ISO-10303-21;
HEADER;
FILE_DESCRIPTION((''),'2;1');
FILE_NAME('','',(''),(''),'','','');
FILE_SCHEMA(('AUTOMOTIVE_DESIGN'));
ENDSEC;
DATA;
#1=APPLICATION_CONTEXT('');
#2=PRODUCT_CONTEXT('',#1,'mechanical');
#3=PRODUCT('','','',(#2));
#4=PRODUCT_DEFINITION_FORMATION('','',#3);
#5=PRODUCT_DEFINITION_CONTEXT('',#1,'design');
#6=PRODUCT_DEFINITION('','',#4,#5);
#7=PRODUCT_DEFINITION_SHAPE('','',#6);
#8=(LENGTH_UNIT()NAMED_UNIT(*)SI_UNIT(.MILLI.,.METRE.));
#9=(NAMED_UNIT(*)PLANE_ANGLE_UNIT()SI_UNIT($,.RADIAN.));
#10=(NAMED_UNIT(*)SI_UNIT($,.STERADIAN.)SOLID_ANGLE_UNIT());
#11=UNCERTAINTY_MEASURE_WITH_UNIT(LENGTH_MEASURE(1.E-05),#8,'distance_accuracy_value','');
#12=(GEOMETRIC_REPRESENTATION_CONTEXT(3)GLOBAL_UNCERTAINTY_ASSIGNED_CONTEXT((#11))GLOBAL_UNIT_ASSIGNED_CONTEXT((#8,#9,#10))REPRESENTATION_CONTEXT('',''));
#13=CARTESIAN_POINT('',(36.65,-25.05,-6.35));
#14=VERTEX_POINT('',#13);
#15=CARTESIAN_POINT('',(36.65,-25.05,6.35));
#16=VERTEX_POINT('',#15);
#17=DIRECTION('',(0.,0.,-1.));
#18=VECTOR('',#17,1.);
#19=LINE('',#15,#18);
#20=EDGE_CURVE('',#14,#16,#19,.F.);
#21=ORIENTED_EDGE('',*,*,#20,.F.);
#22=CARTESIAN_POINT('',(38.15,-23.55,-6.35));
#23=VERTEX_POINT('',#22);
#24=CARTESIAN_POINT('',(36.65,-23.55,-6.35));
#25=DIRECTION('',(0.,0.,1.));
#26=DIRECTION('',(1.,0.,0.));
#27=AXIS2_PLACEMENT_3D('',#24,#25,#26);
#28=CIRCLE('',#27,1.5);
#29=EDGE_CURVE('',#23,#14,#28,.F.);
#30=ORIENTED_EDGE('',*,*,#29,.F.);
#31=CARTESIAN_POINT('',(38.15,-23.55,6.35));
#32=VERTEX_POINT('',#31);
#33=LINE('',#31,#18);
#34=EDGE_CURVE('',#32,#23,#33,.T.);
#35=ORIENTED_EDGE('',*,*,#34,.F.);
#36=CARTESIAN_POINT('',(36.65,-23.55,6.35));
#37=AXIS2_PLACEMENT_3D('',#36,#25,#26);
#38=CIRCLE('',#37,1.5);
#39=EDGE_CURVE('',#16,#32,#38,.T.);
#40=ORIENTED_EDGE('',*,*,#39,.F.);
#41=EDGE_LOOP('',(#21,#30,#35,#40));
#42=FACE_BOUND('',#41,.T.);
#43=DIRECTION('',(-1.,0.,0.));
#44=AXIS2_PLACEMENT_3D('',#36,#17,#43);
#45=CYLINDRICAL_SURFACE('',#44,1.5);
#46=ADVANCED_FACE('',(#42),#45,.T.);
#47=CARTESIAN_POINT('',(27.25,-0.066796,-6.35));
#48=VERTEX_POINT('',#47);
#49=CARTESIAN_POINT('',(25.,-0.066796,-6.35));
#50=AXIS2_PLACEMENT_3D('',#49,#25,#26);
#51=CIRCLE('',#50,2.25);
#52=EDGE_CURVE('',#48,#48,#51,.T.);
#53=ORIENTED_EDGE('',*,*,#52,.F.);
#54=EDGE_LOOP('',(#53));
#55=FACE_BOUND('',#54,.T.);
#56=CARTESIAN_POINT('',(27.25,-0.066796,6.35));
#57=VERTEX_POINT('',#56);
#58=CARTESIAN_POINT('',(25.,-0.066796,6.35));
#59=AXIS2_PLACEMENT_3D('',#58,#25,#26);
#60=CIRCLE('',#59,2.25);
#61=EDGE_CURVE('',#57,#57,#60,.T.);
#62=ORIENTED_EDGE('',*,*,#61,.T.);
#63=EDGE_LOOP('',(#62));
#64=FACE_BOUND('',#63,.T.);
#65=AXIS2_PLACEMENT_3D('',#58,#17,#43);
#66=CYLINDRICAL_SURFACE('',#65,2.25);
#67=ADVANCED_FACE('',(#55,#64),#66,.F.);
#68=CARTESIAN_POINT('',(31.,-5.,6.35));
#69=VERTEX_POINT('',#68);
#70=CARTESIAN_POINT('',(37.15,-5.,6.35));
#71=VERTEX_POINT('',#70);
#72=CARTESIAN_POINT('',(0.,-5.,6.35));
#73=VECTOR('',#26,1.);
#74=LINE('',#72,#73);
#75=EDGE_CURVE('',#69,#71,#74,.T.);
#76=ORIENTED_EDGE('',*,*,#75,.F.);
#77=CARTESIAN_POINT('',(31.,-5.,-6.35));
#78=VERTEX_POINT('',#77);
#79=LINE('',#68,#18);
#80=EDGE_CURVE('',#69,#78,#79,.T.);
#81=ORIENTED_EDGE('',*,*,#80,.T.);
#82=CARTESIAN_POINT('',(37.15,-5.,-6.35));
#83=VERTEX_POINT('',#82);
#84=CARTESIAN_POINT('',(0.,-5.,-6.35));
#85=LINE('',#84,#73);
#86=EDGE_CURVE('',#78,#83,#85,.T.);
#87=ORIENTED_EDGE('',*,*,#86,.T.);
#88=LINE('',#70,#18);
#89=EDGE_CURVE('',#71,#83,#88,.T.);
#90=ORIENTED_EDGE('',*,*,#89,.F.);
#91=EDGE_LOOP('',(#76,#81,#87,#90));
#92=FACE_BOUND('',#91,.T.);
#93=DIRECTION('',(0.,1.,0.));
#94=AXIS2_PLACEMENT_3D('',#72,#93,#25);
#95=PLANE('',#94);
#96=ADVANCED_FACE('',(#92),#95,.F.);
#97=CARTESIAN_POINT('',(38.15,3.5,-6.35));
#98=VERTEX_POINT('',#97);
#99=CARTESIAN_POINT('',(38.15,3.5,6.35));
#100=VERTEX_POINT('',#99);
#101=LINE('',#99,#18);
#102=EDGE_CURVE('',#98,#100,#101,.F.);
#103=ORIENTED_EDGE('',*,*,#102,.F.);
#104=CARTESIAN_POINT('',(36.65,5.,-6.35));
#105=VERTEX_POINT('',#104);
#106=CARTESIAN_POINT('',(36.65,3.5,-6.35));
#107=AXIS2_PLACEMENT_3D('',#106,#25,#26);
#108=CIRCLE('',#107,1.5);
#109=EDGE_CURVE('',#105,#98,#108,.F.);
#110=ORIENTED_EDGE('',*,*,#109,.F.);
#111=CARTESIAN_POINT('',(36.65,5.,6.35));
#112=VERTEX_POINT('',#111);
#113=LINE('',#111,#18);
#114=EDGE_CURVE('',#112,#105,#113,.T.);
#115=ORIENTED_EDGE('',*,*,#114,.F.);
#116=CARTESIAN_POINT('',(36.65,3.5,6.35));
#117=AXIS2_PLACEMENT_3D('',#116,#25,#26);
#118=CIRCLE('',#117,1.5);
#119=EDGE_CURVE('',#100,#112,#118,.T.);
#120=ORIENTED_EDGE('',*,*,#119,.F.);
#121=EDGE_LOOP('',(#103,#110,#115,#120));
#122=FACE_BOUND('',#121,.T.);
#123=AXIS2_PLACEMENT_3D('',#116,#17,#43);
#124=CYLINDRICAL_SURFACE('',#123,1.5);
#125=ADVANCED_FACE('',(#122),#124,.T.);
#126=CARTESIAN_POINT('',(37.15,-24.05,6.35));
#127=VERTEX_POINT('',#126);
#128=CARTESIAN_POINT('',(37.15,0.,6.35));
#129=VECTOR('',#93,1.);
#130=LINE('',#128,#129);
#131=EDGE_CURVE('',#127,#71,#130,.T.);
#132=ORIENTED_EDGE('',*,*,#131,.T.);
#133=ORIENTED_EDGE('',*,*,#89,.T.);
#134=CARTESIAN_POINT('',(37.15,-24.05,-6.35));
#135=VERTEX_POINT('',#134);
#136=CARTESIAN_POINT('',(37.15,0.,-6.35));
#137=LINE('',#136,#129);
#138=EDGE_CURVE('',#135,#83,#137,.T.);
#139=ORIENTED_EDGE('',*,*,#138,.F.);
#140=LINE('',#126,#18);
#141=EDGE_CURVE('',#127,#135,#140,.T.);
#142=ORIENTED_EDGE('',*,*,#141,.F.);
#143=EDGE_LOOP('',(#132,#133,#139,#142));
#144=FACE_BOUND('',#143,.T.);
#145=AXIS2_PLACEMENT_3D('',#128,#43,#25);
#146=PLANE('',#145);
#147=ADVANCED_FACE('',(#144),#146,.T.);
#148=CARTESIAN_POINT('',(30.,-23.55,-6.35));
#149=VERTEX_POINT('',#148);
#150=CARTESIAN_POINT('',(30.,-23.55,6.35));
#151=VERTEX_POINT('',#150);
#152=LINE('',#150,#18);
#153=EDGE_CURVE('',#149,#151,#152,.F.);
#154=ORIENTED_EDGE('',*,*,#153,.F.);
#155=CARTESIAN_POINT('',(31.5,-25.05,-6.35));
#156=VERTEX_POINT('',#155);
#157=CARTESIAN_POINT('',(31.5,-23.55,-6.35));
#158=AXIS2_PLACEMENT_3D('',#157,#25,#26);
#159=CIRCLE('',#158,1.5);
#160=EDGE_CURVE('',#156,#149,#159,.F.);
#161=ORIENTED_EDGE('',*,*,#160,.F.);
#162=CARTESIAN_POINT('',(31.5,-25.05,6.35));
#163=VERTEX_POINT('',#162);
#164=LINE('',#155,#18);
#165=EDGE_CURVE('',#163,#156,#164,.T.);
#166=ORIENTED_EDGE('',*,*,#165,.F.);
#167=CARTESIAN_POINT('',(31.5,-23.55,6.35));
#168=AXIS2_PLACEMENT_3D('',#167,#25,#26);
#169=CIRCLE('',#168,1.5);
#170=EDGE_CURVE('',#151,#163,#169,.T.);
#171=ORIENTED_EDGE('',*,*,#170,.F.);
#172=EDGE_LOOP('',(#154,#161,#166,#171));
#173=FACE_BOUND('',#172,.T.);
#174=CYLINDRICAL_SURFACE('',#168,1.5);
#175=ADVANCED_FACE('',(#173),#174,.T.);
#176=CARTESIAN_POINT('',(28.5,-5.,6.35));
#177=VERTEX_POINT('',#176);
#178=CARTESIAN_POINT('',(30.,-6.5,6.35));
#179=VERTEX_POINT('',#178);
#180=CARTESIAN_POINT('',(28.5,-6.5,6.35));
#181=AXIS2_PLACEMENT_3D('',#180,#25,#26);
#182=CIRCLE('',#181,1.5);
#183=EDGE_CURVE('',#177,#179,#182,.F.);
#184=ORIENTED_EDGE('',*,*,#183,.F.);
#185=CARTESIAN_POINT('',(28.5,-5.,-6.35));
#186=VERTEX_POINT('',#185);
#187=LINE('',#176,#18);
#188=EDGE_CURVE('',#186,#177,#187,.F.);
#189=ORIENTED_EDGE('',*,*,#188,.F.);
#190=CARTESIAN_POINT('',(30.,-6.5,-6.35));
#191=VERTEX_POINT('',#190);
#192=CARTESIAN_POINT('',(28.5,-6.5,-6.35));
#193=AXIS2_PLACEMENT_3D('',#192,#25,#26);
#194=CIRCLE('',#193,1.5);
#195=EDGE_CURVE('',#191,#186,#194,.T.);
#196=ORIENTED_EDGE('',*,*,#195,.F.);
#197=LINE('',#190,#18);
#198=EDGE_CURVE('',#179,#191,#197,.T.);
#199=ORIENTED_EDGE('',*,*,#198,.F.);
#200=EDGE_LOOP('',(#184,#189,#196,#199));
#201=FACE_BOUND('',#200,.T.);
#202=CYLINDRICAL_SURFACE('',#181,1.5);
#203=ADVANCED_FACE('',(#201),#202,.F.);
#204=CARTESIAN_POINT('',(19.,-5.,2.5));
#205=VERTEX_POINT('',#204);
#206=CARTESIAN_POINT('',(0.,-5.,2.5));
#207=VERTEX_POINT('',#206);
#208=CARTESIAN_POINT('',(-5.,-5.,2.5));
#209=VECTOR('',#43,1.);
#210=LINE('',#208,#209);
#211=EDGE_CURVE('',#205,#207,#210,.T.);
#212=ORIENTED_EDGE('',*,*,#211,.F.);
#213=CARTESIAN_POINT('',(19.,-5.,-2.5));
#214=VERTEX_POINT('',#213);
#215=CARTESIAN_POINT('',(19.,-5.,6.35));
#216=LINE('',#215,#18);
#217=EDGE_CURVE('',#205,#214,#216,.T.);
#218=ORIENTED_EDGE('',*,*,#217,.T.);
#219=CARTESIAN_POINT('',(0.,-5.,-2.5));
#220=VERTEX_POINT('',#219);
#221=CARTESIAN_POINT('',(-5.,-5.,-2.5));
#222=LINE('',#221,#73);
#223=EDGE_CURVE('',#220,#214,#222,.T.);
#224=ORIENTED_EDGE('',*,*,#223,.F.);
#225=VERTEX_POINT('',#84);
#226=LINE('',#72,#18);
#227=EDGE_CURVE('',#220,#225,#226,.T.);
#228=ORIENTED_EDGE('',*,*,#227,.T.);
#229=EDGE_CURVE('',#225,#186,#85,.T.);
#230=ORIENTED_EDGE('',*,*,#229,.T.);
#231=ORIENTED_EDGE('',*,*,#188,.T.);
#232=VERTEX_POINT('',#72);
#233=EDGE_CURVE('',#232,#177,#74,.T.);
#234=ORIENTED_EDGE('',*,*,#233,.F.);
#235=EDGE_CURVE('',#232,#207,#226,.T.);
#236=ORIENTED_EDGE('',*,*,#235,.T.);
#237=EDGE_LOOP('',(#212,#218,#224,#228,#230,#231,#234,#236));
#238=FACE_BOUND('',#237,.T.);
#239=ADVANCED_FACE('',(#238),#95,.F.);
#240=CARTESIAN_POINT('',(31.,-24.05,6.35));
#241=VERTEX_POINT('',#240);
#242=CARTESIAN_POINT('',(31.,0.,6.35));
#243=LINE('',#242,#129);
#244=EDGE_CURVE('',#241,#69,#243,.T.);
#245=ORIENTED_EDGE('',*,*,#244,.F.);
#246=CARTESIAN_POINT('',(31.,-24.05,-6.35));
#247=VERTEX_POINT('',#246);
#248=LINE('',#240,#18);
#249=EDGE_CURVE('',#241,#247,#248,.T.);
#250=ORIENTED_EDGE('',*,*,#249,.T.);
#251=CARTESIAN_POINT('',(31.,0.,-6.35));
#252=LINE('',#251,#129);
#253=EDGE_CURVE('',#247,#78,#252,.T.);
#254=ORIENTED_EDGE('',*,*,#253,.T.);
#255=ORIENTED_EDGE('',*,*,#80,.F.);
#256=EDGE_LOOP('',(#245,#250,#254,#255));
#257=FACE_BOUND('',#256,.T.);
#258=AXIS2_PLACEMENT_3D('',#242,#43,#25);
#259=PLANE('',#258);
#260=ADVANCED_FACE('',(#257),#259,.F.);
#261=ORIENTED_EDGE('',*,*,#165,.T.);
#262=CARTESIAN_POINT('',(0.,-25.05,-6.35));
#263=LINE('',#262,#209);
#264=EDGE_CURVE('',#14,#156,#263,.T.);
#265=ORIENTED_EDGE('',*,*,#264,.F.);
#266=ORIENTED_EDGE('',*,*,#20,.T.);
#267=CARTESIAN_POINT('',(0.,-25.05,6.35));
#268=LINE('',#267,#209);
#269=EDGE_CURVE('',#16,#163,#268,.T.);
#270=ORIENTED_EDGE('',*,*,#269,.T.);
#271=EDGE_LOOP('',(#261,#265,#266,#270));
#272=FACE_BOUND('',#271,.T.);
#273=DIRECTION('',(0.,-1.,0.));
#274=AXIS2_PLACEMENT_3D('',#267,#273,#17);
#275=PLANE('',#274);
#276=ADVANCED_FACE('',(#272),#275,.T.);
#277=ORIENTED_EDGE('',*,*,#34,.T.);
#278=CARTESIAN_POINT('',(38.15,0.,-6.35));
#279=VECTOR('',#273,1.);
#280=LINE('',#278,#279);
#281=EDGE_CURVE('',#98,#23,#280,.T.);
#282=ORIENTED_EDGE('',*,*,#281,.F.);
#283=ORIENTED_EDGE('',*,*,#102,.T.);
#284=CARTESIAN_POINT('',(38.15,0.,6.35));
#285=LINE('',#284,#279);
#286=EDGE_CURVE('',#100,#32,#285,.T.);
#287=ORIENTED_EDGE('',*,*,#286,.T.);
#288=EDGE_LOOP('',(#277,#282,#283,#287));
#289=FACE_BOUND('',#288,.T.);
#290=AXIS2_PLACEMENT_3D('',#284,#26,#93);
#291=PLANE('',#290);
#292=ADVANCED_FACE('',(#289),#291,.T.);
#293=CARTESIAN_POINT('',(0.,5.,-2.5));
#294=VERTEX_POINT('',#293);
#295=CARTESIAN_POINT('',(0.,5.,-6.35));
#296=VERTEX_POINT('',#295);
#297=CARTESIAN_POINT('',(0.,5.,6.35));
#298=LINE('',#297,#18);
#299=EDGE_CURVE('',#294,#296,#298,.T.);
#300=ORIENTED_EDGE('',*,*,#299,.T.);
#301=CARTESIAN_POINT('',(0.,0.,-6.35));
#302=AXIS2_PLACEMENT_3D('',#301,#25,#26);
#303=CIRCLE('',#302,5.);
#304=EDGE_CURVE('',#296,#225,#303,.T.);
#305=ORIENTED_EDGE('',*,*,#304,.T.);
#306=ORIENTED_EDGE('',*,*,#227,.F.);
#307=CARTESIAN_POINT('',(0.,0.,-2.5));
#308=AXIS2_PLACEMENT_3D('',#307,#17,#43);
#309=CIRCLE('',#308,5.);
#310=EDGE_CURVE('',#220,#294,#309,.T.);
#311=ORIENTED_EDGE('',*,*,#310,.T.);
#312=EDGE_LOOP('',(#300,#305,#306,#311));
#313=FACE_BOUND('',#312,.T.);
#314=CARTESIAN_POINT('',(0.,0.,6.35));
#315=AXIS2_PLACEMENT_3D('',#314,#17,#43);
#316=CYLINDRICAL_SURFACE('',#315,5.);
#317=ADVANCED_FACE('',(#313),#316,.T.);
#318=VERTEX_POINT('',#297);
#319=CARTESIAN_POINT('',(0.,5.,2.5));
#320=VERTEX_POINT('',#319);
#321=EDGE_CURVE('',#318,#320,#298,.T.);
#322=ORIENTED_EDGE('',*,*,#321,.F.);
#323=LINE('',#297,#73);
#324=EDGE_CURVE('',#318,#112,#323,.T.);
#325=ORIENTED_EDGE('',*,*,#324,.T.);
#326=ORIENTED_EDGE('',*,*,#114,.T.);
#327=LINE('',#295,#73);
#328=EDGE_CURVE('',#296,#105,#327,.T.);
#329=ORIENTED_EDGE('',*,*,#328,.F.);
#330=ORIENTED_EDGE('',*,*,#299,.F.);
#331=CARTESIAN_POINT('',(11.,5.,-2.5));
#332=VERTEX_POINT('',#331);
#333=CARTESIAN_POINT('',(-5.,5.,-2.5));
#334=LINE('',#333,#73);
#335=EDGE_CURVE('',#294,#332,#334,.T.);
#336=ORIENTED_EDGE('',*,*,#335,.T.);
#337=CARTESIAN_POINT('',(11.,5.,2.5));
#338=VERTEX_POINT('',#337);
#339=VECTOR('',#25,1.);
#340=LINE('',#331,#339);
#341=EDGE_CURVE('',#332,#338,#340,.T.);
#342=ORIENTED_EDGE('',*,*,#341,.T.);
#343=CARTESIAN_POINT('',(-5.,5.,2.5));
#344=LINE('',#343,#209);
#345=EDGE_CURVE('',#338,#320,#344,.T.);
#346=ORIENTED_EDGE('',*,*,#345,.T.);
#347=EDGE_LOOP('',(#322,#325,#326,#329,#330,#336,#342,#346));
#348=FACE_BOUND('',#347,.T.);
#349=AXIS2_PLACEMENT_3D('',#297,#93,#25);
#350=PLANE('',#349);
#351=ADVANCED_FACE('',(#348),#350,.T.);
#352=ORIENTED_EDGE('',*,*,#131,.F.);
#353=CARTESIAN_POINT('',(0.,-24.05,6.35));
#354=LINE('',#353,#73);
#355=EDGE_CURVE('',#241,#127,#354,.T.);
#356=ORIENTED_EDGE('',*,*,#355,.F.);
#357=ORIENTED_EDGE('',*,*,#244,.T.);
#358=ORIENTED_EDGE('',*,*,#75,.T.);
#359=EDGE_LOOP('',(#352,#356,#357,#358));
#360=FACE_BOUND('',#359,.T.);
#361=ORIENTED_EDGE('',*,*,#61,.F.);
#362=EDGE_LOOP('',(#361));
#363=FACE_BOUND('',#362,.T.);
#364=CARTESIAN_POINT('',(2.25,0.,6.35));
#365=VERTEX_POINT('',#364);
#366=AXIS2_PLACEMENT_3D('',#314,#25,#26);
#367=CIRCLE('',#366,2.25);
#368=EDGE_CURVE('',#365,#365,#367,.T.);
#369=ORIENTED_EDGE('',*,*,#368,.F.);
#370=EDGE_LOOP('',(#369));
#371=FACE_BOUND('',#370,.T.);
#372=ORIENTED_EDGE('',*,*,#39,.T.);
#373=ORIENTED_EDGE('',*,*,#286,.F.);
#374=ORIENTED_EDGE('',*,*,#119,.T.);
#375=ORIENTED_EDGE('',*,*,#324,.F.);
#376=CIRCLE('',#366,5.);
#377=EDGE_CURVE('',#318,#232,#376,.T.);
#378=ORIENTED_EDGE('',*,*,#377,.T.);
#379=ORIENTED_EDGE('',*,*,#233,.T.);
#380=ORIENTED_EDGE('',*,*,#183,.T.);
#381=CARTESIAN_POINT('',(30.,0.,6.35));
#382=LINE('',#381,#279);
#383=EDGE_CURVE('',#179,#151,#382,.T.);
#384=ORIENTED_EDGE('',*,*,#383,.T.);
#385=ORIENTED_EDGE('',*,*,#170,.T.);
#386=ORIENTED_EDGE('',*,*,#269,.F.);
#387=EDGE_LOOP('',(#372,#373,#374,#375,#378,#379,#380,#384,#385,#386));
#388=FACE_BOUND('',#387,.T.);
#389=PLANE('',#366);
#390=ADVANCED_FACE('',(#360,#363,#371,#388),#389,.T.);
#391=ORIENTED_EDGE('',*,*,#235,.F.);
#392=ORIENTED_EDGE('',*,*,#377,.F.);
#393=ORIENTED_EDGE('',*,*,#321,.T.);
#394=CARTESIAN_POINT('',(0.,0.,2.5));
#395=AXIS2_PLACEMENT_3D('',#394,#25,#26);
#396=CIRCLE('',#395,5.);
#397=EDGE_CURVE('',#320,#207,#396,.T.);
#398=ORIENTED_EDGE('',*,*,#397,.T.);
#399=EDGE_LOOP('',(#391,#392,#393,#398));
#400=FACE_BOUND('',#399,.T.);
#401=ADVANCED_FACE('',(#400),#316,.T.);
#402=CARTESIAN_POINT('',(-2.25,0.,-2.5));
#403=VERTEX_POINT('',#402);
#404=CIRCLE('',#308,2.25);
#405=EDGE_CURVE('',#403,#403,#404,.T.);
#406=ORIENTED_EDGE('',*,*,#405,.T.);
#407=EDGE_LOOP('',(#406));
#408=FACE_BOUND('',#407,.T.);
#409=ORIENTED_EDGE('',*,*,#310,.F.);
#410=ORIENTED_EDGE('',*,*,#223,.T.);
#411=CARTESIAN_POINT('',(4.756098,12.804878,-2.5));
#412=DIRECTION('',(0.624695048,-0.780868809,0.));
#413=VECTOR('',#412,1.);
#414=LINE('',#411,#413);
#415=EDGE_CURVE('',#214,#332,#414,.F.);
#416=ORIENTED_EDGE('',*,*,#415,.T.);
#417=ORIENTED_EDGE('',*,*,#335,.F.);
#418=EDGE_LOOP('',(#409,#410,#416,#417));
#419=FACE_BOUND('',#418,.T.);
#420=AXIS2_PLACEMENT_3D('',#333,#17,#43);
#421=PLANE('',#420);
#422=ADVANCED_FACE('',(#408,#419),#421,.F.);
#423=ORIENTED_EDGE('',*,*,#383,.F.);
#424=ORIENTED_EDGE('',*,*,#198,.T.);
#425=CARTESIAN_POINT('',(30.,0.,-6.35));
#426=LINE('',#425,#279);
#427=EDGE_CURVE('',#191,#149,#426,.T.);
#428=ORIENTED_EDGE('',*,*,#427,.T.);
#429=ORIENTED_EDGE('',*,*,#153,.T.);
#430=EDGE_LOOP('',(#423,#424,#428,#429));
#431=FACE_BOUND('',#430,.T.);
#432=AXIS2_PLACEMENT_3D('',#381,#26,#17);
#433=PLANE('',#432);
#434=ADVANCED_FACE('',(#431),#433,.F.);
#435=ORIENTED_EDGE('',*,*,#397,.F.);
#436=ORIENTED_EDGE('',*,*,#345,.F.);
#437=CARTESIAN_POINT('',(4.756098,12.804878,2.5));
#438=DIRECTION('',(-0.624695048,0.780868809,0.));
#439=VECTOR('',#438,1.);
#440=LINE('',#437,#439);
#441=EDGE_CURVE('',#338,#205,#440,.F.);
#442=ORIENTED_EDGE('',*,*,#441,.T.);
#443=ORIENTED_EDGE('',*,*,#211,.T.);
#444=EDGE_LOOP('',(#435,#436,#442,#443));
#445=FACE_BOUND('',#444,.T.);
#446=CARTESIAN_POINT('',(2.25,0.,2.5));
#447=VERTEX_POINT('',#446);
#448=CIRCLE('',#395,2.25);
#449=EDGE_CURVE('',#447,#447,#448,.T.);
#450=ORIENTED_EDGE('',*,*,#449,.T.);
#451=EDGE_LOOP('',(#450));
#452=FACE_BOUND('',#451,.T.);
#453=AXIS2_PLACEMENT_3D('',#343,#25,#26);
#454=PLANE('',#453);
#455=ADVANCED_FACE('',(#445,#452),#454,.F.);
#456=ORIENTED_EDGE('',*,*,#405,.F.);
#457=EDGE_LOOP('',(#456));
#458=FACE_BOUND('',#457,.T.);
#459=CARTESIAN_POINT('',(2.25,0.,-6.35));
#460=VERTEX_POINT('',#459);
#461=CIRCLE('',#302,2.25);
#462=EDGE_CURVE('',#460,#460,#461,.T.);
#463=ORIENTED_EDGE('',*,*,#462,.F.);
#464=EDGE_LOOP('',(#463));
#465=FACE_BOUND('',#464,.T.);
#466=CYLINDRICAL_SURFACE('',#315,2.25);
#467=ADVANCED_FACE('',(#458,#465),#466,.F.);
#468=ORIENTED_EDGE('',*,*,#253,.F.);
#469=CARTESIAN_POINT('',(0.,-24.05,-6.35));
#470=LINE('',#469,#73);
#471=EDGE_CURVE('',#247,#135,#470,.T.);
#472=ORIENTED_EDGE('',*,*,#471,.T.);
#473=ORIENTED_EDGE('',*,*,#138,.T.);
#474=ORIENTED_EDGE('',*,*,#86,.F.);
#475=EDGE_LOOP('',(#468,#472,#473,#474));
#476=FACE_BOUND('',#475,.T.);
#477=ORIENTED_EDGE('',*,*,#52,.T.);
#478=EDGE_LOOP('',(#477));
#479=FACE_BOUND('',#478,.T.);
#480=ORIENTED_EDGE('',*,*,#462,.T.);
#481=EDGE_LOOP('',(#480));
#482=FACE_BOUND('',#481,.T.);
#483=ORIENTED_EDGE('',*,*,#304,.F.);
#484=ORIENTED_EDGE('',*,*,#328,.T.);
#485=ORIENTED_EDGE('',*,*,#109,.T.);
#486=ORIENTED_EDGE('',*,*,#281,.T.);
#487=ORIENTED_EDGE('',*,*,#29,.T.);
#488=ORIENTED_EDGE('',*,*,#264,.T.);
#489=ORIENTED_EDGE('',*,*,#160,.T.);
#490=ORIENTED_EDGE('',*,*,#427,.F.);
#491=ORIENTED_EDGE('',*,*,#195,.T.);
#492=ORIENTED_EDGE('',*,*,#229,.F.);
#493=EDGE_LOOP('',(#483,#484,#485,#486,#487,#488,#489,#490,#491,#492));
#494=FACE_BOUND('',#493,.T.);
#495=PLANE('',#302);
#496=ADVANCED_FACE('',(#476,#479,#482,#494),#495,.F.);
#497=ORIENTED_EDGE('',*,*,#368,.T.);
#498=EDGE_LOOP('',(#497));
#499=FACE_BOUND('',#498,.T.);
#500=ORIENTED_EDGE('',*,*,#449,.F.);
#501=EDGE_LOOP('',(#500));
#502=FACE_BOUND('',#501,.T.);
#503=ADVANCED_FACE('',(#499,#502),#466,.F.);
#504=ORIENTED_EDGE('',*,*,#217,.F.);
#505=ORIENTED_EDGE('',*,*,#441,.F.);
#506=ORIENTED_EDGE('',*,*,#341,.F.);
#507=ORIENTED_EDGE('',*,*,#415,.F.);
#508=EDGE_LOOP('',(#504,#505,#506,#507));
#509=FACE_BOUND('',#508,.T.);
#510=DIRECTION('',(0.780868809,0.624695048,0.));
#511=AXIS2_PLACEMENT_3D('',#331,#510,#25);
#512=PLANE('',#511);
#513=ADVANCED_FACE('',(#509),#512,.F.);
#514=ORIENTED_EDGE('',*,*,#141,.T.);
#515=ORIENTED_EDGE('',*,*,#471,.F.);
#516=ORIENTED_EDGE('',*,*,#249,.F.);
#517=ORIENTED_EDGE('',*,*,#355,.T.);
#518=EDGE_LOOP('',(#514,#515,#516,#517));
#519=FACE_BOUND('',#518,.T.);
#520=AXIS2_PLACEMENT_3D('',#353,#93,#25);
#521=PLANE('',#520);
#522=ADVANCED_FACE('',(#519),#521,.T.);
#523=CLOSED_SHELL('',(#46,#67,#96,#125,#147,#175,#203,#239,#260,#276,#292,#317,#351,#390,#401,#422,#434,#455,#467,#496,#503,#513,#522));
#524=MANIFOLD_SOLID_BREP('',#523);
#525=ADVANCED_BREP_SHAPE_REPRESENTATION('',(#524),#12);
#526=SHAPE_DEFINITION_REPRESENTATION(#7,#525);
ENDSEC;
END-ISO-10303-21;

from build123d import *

# Parameters (mm, degrees)
SKETCH1_R           = 2.25
SKETCH1_W           = 6.15
SKETCH1_H           = 19.05
BOSS_EXTRUDE1_DEPTH = 6.35
SKETCH13_W          = 16
SKETCH13_H          = 5
CUT_EXTRUDE1_DEPTH  = 10
CHAMFER1_SIZE2      = 10
CHAMFER1_SIZE       = 8
FILLET1_R           = 1.5


with BuildPart() as part:
    # Sketch1 → Boss-Extrude1 (new, symmetric)
    with BuildSketch(Plane.XY):
        with BuildLine():
            Line((0, -5), (30, -5))
            Line((30, -5), (30, -25.05))
            Line((30, -25.05), (38.15, -25.05))
            Line((38.15, -25.05), (38.15, 5))
            Line((38.15, 5), (0, 5))
            ThreePointArc((0, 5), (-5, 0), (0, -5))
        make_face()
        Circle(SKETCH1_R, mode=Mode.SUBTRACT)
        with Locations((25, -0.066795827)):
            Circle(SKETCH1_R, mode=Mode.SUBTRACT)
        with Locations((34.075, -14.525)):
            Rectangle(SKETCH1_W, SKETCH1_H, mode=Mode.SUBTRACT)
    extrude(amount=BOSS_EXTRUDE1_DEPTH, both=True)

    # Sketch13 → Cut-Extrude1 (cut)
    with BuildSketch(Plane.XZ.offset(5)):
        with Locations((3, 0)):
            Rectangle(SKETCH13_W, SKETCH13_H)
    extrude(amount=-CUT_EXTRUDE1_DEPTH, mode=Mode.SUBTRACT)

    # Chamfer1
    chamfer1_edges = [part.edges().sort_by_distance(p)[0] for p in [
        (11, -5, 0),
    ]]
    chamfer1_side = [part.faces().sort_by_distance(p)[0] for p in [
        (11.16, -5, 0),
    ]]
    chamfer(chamfer1_edges, length=CHAMFER1_SIZE - 0.0001, length2=CHAMFER1_SIZE2 - 0.0001, reference=chamfer1_side[0])  # a hair under: the kernel refuses the full size

    # Fillet1
    fillet1_edges = [part.edges().sort_by_distance(p)[0] for p in [
        (38.15, 5, 0),
        (38.15, -25.05, 0),
        (30, -25.05, 0),
        (30, -5, 0),
    ]]
    fillet(fillet1_edges, radius=FILLET1_R)


solid = part.part
